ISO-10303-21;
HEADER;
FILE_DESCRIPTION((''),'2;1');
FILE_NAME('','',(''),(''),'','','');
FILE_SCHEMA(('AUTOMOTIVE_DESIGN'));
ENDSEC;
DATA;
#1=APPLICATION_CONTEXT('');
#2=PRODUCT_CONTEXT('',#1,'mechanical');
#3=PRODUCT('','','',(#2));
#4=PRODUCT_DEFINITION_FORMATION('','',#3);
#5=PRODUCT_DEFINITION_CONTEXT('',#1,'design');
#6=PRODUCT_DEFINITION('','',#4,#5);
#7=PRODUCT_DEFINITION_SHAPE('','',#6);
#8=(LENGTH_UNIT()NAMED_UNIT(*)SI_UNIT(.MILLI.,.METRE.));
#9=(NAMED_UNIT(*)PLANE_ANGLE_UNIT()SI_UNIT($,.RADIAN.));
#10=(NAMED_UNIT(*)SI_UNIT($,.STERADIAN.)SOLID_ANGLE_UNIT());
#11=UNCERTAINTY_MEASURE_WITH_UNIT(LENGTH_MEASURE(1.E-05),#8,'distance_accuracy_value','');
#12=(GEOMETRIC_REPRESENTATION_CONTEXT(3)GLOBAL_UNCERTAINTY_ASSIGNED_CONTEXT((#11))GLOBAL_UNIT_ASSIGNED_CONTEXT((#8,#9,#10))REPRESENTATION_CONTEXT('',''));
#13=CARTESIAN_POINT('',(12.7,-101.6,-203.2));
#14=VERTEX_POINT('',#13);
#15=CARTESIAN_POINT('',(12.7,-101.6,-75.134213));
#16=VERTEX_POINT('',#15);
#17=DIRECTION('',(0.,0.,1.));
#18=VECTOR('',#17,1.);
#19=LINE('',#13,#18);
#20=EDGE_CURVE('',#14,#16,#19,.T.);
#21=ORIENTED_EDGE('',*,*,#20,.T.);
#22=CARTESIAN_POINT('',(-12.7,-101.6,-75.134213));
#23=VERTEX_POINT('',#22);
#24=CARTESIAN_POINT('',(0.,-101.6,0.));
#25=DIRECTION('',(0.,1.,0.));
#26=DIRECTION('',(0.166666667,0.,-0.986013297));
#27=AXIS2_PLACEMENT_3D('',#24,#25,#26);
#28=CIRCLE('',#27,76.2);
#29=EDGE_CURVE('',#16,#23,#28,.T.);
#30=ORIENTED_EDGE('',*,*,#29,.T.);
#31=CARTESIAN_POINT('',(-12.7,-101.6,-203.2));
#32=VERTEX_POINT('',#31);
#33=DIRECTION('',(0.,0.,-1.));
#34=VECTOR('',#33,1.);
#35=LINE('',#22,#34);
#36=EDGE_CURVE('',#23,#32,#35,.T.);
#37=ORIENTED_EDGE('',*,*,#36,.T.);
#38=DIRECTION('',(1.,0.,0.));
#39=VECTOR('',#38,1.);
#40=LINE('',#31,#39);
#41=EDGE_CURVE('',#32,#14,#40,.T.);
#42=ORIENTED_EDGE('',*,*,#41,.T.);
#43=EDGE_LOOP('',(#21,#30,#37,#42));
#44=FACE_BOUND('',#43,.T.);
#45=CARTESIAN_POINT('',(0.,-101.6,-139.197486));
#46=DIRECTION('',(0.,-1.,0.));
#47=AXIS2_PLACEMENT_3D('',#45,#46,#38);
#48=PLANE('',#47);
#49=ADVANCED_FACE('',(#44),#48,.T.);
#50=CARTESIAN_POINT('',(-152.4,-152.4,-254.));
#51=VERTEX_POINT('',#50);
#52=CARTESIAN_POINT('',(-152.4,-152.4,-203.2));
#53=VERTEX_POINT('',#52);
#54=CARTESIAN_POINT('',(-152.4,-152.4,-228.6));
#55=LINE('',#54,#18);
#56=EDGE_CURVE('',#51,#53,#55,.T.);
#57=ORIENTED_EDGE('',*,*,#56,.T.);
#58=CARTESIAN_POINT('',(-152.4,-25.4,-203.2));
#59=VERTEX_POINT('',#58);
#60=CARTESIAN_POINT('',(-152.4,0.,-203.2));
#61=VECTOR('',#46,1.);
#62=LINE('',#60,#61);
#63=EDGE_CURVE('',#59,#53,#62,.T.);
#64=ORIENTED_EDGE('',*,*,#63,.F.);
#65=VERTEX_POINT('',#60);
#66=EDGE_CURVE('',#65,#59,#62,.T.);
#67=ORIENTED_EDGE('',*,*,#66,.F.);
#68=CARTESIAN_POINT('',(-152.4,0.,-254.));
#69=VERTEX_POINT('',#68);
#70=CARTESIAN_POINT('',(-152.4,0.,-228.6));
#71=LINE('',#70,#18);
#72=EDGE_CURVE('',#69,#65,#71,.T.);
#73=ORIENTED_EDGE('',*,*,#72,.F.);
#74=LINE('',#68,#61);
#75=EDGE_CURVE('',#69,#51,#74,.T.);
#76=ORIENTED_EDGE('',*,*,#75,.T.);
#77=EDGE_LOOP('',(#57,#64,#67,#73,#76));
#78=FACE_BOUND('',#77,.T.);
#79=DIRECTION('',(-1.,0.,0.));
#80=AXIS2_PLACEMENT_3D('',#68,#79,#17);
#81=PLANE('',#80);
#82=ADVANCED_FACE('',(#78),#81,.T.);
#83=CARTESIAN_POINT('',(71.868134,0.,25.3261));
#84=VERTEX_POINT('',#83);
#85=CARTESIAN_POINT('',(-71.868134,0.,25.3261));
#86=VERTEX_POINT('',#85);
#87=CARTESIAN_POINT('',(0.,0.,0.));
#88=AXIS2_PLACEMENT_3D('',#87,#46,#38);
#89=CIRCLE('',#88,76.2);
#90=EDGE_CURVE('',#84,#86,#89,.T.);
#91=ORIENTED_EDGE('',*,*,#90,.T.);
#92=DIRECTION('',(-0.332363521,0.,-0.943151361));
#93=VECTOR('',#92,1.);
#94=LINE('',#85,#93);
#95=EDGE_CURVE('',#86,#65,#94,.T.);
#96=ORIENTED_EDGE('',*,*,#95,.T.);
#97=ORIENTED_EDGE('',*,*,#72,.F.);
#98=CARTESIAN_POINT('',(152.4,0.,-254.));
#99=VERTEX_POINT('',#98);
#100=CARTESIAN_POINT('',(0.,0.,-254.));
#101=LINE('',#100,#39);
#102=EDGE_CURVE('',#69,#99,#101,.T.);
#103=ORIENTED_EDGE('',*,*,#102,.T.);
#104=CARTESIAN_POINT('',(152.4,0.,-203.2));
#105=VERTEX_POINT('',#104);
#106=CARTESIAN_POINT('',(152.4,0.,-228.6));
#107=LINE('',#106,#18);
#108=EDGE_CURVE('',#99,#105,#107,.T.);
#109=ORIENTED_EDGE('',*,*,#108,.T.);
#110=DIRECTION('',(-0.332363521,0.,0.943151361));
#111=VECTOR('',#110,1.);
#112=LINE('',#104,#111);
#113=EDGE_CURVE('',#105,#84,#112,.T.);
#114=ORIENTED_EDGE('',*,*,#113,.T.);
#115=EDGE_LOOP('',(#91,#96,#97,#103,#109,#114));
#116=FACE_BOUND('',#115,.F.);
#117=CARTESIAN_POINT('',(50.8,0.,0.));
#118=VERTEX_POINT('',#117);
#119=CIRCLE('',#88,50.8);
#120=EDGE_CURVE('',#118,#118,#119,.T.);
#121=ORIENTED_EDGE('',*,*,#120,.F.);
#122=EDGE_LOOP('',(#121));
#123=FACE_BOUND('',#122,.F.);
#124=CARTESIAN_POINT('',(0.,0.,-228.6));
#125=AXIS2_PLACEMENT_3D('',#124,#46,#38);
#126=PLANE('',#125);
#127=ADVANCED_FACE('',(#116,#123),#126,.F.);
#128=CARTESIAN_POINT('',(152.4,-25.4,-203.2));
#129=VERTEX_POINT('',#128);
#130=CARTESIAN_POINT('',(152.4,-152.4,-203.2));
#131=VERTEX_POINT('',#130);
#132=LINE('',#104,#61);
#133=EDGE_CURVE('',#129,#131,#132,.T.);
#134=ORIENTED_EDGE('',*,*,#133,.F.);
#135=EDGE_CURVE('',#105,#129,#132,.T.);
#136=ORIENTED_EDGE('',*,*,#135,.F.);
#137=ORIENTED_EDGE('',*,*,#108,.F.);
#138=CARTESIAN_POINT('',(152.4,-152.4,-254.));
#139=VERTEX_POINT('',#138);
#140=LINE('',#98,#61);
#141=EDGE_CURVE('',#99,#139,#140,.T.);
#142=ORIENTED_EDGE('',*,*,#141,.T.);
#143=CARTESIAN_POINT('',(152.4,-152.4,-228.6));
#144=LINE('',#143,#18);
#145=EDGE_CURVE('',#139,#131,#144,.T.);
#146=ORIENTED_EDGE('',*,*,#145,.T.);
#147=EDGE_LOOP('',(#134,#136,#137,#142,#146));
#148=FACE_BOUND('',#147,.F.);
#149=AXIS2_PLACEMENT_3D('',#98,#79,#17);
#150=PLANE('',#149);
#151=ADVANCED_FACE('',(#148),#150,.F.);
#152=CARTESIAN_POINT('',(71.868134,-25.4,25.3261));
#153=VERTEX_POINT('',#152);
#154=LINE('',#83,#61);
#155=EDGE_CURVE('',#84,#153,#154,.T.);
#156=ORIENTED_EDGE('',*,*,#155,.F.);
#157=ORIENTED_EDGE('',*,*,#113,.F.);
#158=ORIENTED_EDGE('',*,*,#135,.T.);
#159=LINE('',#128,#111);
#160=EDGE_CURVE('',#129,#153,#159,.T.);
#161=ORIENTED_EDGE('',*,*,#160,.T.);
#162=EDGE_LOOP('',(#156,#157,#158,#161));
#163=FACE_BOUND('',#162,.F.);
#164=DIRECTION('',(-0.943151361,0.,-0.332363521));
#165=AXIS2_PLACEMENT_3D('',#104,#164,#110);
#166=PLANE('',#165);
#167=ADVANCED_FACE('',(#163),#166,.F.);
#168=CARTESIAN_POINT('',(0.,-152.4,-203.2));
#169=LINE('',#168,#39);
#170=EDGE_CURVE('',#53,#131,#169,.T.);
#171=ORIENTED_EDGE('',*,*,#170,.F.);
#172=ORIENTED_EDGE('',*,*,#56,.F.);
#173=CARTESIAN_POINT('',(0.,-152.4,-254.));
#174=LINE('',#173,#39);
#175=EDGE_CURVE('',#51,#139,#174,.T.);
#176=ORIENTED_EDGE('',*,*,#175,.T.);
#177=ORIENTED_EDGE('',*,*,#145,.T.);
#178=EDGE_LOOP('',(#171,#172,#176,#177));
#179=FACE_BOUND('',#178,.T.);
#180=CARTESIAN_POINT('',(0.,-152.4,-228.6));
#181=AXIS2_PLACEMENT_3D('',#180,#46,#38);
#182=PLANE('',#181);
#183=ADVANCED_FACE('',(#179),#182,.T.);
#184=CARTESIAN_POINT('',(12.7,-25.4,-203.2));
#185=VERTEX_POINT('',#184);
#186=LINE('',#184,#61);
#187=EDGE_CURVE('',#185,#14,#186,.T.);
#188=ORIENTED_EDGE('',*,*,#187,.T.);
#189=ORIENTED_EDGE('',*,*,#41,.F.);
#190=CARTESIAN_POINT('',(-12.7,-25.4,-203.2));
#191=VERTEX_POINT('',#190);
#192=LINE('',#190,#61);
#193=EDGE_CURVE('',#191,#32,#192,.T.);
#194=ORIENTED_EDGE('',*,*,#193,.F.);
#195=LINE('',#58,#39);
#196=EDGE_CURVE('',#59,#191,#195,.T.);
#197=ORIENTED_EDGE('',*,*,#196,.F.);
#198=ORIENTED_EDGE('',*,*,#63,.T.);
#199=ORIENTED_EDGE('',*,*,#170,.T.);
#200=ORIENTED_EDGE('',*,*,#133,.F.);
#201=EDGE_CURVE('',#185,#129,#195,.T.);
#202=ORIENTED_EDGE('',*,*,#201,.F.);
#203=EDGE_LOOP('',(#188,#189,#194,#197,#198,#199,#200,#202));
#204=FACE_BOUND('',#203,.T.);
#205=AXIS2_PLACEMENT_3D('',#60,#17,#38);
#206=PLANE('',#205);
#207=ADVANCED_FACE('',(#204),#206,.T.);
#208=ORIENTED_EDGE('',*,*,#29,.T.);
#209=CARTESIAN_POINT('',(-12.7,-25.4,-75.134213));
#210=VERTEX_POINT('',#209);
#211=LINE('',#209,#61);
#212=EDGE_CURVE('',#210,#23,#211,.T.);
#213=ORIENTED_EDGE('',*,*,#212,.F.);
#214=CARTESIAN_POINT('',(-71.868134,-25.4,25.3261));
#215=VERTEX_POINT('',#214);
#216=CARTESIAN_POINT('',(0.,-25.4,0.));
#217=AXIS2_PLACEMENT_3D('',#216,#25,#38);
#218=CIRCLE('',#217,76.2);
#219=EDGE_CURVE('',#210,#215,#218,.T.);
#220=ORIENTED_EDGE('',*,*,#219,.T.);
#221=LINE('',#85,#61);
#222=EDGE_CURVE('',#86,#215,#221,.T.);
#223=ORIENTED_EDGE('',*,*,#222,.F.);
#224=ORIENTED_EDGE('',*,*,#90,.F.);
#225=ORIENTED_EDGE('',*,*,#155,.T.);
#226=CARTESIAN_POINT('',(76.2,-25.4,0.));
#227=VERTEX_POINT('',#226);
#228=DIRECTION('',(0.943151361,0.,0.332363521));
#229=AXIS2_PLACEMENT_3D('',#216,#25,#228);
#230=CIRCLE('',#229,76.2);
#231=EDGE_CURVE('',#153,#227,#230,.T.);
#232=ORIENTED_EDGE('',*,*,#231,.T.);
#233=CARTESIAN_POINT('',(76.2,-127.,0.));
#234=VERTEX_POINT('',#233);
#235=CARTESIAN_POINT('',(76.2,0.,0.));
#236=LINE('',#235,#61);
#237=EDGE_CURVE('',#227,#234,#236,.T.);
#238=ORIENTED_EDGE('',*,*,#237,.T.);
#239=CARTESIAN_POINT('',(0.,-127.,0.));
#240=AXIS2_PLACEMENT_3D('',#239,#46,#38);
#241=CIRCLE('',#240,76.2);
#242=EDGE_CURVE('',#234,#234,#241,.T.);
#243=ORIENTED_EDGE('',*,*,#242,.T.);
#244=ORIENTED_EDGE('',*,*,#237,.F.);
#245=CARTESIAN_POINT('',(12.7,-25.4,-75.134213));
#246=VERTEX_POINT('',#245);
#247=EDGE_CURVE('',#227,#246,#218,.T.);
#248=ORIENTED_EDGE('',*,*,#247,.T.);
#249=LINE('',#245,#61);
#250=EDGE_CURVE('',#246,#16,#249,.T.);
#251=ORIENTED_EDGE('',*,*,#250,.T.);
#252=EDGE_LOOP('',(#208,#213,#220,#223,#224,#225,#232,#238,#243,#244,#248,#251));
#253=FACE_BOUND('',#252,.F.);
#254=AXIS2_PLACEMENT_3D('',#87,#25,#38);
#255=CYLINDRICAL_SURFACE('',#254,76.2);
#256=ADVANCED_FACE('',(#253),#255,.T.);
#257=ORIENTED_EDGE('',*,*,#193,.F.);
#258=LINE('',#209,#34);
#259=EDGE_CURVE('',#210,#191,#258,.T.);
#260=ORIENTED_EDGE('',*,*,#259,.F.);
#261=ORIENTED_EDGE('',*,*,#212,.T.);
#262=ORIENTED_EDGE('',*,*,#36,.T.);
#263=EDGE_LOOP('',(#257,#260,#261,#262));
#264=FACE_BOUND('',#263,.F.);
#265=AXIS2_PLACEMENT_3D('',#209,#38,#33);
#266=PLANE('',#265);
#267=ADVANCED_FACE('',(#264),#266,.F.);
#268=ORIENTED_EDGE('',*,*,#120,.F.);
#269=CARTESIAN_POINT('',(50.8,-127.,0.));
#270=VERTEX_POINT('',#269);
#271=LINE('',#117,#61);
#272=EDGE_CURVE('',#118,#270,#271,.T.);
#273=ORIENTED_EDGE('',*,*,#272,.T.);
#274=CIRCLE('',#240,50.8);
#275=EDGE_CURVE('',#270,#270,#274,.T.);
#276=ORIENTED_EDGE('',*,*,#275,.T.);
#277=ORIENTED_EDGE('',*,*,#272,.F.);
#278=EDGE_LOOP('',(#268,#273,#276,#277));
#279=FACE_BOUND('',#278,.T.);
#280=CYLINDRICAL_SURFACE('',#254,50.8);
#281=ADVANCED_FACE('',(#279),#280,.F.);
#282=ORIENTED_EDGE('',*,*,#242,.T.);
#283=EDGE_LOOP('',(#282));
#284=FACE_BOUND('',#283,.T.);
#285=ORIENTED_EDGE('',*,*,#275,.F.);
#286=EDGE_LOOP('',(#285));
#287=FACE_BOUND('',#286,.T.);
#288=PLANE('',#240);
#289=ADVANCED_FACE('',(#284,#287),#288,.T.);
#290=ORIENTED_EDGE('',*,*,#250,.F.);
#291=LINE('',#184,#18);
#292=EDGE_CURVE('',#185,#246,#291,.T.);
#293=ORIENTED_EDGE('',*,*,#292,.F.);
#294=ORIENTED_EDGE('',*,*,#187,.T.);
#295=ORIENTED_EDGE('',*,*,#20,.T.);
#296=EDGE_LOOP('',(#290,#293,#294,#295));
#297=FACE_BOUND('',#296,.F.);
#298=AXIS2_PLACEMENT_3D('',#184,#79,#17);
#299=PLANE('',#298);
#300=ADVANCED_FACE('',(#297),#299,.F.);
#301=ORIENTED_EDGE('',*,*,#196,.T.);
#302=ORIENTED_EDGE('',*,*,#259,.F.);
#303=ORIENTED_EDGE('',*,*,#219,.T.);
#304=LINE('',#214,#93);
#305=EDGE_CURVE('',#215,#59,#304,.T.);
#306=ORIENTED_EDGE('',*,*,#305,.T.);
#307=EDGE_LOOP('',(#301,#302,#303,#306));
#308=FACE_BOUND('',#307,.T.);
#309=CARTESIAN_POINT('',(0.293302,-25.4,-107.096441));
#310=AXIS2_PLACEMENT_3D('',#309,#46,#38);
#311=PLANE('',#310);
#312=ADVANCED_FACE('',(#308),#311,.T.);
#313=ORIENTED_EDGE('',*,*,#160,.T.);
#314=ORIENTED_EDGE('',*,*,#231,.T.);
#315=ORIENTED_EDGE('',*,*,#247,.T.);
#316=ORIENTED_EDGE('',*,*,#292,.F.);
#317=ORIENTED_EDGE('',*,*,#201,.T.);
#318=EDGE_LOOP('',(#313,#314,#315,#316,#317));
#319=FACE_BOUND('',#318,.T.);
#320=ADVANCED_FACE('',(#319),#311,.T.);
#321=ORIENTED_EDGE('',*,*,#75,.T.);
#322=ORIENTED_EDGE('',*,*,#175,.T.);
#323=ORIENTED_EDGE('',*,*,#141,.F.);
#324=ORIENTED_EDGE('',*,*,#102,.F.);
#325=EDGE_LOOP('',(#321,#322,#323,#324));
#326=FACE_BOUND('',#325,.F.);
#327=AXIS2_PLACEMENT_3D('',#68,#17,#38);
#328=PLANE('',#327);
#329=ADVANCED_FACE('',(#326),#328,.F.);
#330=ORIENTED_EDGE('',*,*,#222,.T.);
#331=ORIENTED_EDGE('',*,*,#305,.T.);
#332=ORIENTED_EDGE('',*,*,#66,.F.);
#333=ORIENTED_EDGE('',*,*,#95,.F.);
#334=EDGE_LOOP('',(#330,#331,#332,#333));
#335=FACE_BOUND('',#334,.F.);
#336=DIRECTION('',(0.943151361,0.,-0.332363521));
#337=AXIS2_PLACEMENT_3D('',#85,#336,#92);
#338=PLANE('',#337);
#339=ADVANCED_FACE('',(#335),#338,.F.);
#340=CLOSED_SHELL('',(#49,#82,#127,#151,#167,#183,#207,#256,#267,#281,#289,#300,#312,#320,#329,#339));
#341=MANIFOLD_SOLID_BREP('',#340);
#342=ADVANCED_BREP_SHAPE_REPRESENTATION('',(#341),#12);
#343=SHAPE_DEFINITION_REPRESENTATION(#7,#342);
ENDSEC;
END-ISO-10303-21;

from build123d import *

# Parameters (mm, degrees)
F0_R     = 76.2
F0_R_2   = 50.8
F1_DEPTH = 127
F3_DEPTH = 25.4
F4_W     = 304.8
F4_H     = 50.8
F5_DEPTH = 152.4
F7_DEPTH = 76.2


with BuildPart() as f1:
    # F0 (on Front) → F1 (new body)
    with BuildSketch(Plane.XZ):
        Circle(F0_R)
        Circle(F0_R_2, mode=Mode.SUBTRACT)
    extrude(amount=F1_DEPTH)

    # F2 (on Front) → F3 (join)
    with BuildSketch(Plane.XZ):
        with BuildLine():
            ThreePointArc((71.8681337184, 25.3261002888), (75.1092264284, 12.8469492616), (76.2, 0))
            ThreePointArc((76.2, 0), (-12.8469492616, -75.1092264284), (-71.8681337184, 25.3261002888))
            Line((-71.8681337184, 25.3261002888), (-152.4, -203.2))
            Line((-152.4, -203.2), (152.4, -203.2))
            Line((152.4, -203.2), (71.8681337184, 25.3261002888))
        make_face()
    extrude(amount=F3_DEPTH)

    # F4 (on Front) → F5 (join)
    with BuildSketch(Plane.XZ):
        with Locations((0, -228.6)):
            Rectangle(F4_W, F4_H)
    extrude(amount=F5_DEPTH)

    # F6 (on face) → F7 (join)
    with BuildSketch(Plane.XZ.offset(25.4)):
        with BuildLine():
            Line((-12.7, -75.1342132454), (-12.7, -203.2))
            Line((-12.7, -203.2), (12.7, -203.2))
            Line((12.7, -203.2), (12.7, -75.1342132454))
            ThreePointArc((12.7, -75.1342132454), (0, -76.2), (-12.7, -75.1342132454))
        make_face()
    extrude(amount=F7_DEPTH)


with BuildPart() as f8_1:
    # F8: copy of F1
    add(f1.part)


solid = f1.part
